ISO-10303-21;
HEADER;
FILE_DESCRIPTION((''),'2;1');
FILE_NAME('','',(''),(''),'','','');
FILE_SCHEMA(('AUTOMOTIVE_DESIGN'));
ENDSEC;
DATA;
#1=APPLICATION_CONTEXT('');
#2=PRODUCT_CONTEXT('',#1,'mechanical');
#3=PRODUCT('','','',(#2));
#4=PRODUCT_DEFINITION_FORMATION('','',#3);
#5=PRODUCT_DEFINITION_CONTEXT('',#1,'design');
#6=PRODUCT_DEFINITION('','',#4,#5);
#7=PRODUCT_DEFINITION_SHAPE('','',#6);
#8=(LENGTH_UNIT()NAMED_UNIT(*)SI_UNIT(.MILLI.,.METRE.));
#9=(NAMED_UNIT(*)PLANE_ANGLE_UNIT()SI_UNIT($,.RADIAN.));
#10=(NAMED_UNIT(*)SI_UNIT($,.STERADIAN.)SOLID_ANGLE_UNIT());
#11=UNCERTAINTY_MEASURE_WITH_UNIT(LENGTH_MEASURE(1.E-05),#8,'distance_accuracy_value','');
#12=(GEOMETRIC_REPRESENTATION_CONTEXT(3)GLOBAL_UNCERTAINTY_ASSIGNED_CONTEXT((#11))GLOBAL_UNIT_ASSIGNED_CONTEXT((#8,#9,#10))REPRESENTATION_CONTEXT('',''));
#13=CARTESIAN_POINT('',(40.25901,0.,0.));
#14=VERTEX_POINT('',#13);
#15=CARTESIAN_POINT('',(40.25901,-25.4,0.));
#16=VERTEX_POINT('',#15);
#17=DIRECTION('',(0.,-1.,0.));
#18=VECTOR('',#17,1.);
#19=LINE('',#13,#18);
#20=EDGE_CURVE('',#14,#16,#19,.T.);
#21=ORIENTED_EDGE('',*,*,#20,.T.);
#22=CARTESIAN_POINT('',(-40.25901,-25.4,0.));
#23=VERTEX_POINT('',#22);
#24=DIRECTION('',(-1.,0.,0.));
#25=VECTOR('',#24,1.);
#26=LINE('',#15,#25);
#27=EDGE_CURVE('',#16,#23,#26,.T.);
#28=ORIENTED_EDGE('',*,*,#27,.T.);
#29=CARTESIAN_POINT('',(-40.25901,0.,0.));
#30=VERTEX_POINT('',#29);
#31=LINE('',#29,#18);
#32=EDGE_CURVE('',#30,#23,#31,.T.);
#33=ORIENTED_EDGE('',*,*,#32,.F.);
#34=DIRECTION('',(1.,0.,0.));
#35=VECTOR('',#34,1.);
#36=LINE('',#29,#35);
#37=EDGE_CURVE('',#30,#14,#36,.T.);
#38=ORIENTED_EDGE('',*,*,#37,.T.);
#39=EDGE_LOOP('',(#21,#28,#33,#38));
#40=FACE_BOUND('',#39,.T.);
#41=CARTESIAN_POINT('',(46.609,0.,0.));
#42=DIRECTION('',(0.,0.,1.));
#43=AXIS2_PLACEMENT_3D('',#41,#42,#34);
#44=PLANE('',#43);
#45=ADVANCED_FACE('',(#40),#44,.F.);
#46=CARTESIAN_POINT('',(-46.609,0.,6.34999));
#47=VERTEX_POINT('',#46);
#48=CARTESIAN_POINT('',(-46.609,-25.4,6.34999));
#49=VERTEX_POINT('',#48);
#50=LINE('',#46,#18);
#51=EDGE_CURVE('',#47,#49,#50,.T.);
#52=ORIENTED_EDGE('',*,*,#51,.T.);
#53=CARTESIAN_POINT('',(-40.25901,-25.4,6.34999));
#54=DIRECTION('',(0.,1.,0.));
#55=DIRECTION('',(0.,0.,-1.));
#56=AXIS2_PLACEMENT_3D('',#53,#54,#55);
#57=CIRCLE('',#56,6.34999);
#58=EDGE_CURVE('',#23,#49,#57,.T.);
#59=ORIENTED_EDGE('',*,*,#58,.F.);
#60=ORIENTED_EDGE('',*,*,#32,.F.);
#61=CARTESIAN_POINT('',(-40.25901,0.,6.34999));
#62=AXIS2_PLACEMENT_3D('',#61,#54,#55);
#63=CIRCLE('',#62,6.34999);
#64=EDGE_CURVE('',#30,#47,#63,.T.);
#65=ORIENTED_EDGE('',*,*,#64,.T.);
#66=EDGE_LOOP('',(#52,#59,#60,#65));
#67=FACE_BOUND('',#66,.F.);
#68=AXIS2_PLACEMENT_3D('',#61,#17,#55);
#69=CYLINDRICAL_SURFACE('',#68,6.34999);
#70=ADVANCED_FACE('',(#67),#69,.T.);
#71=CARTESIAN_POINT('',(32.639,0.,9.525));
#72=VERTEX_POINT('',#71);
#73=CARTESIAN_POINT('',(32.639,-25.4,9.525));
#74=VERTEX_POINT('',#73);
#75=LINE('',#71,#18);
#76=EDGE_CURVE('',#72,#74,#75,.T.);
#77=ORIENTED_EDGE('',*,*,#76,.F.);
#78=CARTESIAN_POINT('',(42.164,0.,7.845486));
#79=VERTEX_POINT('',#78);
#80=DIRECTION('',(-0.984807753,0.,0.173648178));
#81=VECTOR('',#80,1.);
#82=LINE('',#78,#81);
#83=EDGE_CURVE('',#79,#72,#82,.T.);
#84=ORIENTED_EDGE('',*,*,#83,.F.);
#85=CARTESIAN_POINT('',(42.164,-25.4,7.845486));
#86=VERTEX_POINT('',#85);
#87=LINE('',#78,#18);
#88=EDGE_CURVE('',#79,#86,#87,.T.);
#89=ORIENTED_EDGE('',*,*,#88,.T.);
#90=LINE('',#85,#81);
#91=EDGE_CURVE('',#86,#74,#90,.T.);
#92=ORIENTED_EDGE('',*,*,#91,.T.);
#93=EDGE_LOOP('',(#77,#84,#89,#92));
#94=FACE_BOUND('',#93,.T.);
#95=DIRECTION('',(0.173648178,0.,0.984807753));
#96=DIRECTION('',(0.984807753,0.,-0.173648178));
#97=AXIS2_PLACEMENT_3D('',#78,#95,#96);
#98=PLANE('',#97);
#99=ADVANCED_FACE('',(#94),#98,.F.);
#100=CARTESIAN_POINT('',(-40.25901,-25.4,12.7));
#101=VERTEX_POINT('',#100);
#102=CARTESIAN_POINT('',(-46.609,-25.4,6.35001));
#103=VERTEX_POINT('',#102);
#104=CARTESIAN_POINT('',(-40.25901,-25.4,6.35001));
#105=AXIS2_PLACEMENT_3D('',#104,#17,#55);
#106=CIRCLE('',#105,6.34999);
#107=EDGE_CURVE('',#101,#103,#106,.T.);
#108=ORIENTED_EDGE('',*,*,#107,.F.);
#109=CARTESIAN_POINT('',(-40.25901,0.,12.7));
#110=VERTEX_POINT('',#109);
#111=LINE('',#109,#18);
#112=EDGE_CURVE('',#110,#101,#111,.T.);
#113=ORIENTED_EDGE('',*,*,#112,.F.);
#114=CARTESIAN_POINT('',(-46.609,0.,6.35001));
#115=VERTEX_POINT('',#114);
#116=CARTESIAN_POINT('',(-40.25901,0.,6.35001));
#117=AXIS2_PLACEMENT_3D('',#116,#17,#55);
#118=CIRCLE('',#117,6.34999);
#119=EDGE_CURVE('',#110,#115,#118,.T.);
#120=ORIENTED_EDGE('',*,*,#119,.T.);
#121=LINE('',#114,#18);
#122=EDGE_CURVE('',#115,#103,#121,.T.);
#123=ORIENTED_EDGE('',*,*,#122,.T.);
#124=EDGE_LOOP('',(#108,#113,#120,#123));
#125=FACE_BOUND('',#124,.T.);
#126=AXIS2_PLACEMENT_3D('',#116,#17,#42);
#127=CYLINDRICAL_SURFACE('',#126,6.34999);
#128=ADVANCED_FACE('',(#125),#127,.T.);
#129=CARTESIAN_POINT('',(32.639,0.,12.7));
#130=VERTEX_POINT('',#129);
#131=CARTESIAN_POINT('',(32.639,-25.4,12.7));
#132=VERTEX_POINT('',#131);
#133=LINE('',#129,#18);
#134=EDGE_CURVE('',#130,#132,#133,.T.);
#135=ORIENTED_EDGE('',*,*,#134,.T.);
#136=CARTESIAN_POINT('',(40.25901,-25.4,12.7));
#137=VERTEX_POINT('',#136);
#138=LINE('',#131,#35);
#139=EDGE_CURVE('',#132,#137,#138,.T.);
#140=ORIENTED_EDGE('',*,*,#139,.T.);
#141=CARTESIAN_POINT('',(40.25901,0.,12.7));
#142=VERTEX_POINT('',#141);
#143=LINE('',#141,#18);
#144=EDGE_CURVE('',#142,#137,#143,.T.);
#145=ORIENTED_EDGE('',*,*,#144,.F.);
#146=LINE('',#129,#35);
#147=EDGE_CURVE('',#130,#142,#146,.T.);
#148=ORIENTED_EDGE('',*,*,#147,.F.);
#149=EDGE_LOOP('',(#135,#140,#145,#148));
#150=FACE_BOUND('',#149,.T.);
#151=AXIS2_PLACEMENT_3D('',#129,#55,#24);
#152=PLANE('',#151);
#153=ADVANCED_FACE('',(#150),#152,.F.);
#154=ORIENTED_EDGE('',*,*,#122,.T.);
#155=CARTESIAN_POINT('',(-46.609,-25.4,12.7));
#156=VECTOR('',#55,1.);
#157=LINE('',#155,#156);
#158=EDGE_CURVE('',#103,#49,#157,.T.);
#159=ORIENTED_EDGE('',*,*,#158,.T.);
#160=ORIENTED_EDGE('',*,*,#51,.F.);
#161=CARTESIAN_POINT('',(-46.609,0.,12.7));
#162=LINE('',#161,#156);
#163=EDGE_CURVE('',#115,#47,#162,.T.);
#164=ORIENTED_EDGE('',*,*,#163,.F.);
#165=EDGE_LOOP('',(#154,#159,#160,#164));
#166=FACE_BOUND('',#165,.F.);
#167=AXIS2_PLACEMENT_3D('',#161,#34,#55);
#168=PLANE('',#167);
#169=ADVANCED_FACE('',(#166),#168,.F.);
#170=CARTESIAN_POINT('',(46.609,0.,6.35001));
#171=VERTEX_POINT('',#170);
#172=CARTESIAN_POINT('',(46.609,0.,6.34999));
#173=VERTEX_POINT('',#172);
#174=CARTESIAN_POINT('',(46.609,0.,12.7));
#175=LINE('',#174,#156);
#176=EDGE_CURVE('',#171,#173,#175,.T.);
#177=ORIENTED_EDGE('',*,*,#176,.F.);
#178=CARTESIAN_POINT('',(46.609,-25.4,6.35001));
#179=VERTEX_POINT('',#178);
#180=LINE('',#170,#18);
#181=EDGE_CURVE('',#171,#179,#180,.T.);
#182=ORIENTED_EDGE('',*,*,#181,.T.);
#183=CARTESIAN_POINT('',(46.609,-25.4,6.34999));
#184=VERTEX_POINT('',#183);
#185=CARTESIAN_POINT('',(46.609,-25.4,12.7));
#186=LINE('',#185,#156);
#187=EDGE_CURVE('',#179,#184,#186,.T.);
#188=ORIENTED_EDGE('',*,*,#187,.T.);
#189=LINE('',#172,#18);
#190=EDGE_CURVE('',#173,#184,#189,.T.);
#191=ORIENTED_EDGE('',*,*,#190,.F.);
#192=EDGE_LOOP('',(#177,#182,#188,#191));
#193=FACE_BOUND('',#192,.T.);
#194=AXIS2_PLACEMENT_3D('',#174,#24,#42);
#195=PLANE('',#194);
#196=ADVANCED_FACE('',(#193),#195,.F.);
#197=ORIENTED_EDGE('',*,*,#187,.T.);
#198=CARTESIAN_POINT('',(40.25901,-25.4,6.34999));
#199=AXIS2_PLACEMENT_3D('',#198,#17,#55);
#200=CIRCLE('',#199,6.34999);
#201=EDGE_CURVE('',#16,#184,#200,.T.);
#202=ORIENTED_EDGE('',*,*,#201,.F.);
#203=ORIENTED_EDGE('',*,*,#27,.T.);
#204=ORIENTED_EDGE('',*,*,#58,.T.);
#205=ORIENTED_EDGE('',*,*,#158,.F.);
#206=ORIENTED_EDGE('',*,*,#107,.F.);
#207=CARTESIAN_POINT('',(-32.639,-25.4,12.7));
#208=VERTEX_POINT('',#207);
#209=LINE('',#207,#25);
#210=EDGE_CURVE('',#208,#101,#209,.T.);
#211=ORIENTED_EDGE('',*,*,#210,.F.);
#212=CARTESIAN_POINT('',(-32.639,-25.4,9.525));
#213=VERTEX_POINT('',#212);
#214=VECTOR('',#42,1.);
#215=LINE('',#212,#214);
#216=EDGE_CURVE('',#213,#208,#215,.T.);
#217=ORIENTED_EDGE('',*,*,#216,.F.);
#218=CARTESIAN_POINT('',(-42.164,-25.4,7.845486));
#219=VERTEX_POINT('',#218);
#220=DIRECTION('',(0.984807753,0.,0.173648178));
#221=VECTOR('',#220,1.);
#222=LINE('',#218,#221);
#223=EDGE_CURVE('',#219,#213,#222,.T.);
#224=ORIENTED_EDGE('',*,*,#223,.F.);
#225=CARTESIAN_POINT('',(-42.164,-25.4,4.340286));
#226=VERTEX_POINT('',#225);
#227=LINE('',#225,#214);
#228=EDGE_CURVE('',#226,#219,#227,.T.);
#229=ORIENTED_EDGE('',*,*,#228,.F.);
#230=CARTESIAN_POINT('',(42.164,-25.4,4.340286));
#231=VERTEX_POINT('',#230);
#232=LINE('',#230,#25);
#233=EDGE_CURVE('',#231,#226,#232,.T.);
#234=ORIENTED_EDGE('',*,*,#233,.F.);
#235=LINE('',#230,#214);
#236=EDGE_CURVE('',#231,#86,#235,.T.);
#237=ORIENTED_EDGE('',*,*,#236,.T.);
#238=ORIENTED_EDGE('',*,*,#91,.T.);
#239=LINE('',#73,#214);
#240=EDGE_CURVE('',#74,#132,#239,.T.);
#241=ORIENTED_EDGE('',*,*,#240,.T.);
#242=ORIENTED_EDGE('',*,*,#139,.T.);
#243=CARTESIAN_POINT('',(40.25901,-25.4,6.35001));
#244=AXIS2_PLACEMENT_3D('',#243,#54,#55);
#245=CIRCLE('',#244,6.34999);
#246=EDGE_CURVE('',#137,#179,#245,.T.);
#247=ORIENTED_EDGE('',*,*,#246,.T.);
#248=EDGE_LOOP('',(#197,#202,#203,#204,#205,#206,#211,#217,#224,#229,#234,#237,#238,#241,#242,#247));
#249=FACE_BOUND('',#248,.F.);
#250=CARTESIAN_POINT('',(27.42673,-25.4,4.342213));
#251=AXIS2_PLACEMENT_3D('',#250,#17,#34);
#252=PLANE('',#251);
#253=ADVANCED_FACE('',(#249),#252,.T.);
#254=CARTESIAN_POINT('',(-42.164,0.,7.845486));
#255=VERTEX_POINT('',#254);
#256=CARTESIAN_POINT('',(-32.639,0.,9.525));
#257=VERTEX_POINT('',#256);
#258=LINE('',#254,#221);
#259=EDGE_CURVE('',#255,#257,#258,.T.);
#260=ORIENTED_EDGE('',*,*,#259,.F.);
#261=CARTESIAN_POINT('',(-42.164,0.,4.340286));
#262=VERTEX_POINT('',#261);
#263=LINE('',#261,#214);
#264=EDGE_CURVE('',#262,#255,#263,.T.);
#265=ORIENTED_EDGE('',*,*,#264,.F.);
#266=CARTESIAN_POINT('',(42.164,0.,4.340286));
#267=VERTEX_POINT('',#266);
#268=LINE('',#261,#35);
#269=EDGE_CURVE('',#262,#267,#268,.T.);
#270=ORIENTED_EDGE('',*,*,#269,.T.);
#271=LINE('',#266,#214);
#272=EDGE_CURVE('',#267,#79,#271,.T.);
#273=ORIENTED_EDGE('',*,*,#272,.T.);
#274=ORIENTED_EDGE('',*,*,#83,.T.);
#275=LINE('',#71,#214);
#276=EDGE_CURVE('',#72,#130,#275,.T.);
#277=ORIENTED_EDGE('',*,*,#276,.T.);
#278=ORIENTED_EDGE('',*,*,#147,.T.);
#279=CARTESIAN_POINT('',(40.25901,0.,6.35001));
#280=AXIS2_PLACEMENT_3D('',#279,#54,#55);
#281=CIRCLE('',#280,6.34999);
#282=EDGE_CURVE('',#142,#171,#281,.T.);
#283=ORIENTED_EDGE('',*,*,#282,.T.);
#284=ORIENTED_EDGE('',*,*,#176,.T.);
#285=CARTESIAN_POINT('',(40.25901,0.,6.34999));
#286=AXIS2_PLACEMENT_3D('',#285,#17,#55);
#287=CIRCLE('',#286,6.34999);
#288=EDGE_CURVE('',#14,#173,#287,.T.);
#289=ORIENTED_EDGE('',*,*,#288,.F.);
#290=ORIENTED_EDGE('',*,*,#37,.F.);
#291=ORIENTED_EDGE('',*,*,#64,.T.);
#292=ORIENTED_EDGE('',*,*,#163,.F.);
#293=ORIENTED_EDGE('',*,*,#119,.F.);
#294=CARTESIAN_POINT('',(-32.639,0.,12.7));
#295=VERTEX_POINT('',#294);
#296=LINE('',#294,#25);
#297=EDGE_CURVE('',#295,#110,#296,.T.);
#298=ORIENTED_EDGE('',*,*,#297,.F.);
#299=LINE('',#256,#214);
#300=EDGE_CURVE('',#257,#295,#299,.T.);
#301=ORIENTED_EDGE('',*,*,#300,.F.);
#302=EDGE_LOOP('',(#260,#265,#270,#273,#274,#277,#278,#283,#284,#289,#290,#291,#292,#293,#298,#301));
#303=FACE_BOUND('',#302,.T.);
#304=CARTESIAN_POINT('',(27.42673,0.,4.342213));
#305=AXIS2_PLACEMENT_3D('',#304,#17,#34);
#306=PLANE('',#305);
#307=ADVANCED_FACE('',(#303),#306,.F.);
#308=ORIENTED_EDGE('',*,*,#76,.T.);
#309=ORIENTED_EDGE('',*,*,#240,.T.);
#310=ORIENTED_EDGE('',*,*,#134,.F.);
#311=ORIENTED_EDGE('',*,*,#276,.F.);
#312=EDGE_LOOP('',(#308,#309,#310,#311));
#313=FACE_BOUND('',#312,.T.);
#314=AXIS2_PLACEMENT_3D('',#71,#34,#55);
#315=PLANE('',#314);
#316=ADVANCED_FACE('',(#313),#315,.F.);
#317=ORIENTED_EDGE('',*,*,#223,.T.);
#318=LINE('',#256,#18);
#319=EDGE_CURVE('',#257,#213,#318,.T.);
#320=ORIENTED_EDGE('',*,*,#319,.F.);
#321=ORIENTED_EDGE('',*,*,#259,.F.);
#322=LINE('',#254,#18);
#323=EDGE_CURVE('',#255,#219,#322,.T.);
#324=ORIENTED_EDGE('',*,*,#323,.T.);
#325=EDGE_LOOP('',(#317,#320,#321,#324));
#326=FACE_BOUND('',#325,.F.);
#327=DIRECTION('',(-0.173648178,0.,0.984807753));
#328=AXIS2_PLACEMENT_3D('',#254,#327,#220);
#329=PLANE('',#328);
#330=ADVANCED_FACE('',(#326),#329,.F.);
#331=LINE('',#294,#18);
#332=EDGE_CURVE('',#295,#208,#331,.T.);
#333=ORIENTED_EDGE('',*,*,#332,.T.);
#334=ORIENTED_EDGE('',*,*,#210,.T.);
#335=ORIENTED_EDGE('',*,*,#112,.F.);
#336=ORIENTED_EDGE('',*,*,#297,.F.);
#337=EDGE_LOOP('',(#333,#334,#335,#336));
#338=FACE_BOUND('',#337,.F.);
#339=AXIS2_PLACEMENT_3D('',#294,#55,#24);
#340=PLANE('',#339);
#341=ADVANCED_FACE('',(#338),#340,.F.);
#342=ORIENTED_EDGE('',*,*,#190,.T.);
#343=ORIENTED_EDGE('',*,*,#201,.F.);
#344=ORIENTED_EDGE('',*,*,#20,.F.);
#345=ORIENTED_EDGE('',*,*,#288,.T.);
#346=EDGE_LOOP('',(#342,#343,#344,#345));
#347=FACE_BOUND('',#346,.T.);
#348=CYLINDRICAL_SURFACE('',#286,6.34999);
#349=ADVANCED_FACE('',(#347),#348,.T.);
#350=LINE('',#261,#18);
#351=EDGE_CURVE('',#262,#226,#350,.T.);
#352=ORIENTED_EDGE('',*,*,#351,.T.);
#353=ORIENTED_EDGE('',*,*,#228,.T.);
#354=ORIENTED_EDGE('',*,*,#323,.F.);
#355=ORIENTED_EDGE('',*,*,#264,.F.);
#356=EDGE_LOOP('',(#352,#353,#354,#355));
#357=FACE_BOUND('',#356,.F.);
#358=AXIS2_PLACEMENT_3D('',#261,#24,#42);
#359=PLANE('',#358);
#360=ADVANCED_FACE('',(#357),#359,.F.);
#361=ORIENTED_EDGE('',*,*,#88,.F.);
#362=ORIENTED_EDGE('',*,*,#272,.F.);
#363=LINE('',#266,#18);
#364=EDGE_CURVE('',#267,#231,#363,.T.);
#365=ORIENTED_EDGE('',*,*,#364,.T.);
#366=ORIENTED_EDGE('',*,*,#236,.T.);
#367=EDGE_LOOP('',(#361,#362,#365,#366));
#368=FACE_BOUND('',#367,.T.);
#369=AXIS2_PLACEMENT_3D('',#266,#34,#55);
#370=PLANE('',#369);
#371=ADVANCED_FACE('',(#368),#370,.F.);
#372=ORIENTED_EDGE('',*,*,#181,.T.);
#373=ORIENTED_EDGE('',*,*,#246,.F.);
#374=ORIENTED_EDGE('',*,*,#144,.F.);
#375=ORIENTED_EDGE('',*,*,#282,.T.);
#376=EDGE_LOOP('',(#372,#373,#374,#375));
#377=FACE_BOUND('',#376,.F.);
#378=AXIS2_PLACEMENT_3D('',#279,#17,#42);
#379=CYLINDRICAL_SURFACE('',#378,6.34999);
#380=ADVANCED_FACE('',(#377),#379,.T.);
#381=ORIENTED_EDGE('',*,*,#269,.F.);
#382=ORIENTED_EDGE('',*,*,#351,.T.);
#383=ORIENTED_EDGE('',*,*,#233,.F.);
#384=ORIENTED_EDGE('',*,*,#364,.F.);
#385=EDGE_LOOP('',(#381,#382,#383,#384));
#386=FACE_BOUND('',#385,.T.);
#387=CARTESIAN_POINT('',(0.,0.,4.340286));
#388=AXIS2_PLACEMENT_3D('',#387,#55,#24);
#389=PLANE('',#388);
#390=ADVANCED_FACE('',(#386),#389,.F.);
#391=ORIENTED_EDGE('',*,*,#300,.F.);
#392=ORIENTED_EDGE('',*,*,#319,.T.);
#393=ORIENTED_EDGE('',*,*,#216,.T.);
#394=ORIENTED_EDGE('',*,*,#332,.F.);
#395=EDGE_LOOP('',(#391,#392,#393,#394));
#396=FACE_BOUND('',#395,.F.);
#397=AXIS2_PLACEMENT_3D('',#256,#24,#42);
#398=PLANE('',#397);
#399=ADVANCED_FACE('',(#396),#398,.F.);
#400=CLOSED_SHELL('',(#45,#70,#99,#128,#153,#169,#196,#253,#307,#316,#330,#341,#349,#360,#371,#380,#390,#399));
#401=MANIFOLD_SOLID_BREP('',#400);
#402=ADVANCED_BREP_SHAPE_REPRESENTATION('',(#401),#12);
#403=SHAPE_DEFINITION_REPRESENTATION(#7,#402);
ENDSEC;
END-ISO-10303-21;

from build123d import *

# Parameters (mm, degrees)
F1_DEPTH = 25.4
F2_R     = 6.34999


# Not quite as in the source:
# - a fillet or chamfer is up to 0.001 mm smaller than in the source, because OpenCascade refuses the exact size


with BuildPart() as f1:
    # F0 (on Front) → F1 (new body)
    with BuildSketch(Plane.XZ):
        Polygon((-46.609, 0), (0, 0), (0, 4.3402855088), (-42.164, 4.3402855088), (-42.164, 7.8454855088), (-32.639, 9.525), (-32.639, 12.7), (-46.609, 12.7), align=None)
    extrude(amount=F1_DEPTH)

    # F2 (radius 6.35 in the source; OpenCascade refuses exactly that, so slightly less here)
    f2_edges = [f1.edges().sort_by_distance(p)[0] for p in [
        (-46.609, -12.7, 12.7),
        (-46.609, -12.7, 0),
    ]]
    fillet(f2_edges, radius=F2_R)

    # F3: F1 across face


with BuildPart() as f1_1:
    add(f1.part)
    add(f1.part.mirror(Plane(origin=(0, -12.7, 2.1701427544), x_dir=(0, 1, 0), z_dir=(1, 0, 0))))


solid = f1_1.part
